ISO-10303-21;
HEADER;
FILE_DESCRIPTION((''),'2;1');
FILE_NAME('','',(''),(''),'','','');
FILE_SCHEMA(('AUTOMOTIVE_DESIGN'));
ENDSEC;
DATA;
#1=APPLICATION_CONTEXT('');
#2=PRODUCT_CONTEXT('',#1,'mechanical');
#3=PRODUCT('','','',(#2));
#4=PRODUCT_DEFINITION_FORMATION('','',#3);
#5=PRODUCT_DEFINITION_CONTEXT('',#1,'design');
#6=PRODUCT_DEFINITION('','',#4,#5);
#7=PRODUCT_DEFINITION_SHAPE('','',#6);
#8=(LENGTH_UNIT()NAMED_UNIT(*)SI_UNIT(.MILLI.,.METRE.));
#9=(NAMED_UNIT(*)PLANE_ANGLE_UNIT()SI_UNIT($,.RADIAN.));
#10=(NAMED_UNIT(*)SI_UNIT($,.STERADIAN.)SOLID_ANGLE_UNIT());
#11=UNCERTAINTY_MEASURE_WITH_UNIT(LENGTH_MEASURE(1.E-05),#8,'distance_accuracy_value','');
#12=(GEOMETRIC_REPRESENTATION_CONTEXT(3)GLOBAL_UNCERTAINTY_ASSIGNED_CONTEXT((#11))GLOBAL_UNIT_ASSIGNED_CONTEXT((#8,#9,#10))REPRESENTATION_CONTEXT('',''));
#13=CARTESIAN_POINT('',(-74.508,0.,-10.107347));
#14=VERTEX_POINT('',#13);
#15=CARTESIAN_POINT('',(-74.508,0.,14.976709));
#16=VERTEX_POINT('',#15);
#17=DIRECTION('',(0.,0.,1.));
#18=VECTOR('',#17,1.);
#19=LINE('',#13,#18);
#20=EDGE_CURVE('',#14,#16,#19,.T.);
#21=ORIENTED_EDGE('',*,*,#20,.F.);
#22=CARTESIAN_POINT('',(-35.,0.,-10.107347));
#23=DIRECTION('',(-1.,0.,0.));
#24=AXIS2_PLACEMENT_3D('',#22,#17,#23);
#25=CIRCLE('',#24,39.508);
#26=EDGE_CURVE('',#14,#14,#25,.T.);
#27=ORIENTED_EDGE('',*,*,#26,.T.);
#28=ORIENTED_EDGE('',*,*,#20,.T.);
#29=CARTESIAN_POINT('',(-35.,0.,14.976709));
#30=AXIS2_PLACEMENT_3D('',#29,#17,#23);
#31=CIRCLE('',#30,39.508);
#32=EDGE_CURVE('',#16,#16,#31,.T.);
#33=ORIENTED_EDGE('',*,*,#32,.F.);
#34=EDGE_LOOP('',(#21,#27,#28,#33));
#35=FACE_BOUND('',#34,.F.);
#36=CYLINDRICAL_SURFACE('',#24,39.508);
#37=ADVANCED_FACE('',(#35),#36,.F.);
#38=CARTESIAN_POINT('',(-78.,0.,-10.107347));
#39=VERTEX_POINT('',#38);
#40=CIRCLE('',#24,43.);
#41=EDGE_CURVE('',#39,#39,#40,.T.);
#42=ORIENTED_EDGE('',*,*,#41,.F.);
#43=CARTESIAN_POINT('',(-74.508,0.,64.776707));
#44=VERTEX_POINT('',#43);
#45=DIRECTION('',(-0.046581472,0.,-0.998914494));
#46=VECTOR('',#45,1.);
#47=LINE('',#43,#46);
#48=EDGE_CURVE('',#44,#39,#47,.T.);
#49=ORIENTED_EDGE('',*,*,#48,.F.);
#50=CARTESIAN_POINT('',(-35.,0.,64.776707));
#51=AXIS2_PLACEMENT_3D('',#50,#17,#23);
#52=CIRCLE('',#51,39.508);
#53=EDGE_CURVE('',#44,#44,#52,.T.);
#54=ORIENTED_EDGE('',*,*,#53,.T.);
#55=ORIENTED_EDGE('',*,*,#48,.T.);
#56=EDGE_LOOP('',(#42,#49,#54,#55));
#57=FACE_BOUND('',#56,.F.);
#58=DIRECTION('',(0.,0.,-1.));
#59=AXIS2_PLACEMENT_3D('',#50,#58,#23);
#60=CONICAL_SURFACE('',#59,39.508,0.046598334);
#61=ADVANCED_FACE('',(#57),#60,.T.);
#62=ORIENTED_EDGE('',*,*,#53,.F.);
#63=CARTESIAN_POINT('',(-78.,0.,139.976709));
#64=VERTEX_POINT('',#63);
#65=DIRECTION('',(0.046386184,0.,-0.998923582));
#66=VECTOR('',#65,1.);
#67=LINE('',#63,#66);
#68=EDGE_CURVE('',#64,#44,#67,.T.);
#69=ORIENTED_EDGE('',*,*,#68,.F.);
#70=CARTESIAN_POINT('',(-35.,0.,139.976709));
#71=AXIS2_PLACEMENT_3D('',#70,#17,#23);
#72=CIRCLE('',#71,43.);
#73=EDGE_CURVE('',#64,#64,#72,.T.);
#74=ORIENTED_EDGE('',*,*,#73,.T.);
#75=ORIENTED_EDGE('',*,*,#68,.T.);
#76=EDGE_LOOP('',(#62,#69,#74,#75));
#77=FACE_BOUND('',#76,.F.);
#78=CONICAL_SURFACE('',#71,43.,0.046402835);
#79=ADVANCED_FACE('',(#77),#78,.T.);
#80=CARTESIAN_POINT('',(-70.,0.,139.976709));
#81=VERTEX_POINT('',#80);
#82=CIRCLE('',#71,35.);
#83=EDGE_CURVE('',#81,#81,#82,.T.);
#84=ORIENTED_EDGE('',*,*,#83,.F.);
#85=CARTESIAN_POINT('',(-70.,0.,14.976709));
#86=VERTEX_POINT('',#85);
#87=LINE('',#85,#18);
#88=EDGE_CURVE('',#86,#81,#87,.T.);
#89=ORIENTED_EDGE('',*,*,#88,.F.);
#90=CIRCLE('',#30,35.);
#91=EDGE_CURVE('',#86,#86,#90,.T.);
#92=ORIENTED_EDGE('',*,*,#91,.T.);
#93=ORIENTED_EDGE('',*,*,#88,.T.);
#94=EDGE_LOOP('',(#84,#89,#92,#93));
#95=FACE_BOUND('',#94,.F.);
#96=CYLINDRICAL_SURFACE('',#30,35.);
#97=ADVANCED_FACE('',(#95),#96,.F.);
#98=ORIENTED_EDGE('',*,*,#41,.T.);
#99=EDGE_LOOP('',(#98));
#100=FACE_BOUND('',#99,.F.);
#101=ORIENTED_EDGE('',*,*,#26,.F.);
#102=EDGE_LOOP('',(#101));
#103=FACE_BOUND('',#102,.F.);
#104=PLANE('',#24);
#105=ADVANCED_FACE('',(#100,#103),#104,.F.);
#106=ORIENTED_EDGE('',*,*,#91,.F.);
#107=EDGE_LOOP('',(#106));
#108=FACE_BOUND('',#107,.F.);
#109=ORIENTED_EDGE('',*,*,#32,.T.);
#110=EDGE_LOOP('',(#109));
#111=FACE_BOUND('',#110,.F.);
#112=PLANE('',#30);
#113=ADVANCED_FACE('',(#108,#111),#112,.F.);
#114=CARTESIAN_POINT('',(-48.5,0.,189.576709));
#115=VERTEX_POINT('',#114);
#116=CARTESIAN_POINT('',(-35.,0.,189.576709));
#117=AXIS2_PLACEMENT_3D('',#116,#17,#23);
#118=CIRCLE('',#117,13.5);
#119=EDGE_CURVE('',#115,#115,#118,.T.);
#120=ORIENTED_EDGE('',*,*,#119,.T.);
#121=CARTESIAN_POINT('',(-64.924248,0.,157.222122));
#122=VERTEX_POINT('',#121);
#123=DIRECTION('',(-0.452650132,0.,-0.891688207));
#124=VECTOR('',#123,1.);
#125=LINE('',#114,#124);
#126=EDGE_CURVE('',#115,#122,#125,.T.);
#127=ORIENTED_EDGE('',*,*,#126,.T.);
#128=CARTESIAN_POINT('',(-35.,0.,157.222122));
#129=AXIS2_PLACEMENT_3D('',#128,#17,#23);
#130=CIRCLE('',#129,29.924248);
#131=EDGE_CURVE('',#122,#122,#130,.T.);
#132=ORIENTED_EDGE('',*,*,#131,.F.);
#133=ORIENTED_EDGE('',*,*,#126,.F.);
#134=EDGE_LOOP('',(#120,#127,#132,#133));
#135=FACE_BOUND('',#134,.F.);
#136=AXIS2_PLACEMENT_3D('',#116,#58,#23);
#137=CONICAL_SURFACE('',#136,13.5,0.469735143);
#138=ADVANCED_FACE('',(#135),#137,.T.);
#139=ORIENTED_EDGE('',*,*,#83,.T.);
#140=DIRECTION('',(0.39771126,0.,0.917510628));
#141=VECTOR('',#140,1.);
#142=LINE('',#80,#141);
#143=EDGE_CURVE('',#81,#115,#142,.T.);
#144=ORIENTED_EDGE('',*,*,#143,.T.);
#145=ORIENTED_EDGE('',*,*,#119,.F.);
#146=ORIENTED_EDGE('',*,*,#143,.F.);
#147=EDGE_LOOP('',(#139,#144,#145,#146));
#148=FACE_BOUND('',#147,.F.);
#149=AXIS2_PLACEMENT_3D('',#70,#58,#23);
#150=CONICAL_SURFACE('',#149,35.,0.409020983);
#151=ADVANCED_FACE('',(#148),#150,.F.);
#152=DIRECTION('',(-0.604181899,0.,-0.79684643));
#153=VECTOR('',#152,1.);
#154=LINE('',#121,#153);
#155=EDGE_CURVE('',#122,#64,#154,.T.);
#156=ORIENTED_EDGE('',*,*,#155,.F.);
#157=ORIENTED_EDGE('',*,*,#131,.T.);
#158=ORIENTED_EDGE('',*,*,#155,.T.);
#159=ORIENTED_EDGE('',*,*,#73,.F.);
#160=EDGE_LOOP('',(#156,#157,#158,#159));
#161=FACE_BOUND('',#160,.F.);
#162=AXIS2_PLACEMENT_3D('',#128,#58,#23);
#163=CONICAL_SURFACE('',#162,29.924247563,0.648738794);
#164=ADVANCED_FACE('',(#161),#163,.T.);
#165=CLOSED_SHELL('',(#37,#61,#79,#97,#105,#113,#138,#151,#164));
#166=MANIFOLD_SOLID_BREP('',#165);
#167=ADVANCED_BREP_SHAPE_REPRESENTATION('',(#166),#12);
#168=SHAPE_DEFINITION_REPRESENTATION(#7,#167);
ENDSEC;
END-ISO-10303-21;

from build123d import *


# Not quite as in the source:
# - a feature names something its author has since deleted; it is built from what else it names


with BuildPart() as f1:
    # F0 (on Front) → F1 (revolve)
    with BuildSketch(Plane.XZ):
        Polygon((-78, 139.9767085075), (-70, 139.9767085075), (-48.5, 189.5767085075), (-64.9242475629, 157.222121954), align=None)
        Polygon((-74.508, -10.1073468104), (-74.508, 14.9767085075), (-70, 14.9767085075), (-70, 64.7767065075), (-70, 139.9767085075), (-78, 139.9767085075), (-74.508, 64.7767065075), (-78, -10.1073468104), align=None)
    revolve(axis=Axis((-35, 0, -12.4232914925), (0, 0, 1)))


solid = f1.part
